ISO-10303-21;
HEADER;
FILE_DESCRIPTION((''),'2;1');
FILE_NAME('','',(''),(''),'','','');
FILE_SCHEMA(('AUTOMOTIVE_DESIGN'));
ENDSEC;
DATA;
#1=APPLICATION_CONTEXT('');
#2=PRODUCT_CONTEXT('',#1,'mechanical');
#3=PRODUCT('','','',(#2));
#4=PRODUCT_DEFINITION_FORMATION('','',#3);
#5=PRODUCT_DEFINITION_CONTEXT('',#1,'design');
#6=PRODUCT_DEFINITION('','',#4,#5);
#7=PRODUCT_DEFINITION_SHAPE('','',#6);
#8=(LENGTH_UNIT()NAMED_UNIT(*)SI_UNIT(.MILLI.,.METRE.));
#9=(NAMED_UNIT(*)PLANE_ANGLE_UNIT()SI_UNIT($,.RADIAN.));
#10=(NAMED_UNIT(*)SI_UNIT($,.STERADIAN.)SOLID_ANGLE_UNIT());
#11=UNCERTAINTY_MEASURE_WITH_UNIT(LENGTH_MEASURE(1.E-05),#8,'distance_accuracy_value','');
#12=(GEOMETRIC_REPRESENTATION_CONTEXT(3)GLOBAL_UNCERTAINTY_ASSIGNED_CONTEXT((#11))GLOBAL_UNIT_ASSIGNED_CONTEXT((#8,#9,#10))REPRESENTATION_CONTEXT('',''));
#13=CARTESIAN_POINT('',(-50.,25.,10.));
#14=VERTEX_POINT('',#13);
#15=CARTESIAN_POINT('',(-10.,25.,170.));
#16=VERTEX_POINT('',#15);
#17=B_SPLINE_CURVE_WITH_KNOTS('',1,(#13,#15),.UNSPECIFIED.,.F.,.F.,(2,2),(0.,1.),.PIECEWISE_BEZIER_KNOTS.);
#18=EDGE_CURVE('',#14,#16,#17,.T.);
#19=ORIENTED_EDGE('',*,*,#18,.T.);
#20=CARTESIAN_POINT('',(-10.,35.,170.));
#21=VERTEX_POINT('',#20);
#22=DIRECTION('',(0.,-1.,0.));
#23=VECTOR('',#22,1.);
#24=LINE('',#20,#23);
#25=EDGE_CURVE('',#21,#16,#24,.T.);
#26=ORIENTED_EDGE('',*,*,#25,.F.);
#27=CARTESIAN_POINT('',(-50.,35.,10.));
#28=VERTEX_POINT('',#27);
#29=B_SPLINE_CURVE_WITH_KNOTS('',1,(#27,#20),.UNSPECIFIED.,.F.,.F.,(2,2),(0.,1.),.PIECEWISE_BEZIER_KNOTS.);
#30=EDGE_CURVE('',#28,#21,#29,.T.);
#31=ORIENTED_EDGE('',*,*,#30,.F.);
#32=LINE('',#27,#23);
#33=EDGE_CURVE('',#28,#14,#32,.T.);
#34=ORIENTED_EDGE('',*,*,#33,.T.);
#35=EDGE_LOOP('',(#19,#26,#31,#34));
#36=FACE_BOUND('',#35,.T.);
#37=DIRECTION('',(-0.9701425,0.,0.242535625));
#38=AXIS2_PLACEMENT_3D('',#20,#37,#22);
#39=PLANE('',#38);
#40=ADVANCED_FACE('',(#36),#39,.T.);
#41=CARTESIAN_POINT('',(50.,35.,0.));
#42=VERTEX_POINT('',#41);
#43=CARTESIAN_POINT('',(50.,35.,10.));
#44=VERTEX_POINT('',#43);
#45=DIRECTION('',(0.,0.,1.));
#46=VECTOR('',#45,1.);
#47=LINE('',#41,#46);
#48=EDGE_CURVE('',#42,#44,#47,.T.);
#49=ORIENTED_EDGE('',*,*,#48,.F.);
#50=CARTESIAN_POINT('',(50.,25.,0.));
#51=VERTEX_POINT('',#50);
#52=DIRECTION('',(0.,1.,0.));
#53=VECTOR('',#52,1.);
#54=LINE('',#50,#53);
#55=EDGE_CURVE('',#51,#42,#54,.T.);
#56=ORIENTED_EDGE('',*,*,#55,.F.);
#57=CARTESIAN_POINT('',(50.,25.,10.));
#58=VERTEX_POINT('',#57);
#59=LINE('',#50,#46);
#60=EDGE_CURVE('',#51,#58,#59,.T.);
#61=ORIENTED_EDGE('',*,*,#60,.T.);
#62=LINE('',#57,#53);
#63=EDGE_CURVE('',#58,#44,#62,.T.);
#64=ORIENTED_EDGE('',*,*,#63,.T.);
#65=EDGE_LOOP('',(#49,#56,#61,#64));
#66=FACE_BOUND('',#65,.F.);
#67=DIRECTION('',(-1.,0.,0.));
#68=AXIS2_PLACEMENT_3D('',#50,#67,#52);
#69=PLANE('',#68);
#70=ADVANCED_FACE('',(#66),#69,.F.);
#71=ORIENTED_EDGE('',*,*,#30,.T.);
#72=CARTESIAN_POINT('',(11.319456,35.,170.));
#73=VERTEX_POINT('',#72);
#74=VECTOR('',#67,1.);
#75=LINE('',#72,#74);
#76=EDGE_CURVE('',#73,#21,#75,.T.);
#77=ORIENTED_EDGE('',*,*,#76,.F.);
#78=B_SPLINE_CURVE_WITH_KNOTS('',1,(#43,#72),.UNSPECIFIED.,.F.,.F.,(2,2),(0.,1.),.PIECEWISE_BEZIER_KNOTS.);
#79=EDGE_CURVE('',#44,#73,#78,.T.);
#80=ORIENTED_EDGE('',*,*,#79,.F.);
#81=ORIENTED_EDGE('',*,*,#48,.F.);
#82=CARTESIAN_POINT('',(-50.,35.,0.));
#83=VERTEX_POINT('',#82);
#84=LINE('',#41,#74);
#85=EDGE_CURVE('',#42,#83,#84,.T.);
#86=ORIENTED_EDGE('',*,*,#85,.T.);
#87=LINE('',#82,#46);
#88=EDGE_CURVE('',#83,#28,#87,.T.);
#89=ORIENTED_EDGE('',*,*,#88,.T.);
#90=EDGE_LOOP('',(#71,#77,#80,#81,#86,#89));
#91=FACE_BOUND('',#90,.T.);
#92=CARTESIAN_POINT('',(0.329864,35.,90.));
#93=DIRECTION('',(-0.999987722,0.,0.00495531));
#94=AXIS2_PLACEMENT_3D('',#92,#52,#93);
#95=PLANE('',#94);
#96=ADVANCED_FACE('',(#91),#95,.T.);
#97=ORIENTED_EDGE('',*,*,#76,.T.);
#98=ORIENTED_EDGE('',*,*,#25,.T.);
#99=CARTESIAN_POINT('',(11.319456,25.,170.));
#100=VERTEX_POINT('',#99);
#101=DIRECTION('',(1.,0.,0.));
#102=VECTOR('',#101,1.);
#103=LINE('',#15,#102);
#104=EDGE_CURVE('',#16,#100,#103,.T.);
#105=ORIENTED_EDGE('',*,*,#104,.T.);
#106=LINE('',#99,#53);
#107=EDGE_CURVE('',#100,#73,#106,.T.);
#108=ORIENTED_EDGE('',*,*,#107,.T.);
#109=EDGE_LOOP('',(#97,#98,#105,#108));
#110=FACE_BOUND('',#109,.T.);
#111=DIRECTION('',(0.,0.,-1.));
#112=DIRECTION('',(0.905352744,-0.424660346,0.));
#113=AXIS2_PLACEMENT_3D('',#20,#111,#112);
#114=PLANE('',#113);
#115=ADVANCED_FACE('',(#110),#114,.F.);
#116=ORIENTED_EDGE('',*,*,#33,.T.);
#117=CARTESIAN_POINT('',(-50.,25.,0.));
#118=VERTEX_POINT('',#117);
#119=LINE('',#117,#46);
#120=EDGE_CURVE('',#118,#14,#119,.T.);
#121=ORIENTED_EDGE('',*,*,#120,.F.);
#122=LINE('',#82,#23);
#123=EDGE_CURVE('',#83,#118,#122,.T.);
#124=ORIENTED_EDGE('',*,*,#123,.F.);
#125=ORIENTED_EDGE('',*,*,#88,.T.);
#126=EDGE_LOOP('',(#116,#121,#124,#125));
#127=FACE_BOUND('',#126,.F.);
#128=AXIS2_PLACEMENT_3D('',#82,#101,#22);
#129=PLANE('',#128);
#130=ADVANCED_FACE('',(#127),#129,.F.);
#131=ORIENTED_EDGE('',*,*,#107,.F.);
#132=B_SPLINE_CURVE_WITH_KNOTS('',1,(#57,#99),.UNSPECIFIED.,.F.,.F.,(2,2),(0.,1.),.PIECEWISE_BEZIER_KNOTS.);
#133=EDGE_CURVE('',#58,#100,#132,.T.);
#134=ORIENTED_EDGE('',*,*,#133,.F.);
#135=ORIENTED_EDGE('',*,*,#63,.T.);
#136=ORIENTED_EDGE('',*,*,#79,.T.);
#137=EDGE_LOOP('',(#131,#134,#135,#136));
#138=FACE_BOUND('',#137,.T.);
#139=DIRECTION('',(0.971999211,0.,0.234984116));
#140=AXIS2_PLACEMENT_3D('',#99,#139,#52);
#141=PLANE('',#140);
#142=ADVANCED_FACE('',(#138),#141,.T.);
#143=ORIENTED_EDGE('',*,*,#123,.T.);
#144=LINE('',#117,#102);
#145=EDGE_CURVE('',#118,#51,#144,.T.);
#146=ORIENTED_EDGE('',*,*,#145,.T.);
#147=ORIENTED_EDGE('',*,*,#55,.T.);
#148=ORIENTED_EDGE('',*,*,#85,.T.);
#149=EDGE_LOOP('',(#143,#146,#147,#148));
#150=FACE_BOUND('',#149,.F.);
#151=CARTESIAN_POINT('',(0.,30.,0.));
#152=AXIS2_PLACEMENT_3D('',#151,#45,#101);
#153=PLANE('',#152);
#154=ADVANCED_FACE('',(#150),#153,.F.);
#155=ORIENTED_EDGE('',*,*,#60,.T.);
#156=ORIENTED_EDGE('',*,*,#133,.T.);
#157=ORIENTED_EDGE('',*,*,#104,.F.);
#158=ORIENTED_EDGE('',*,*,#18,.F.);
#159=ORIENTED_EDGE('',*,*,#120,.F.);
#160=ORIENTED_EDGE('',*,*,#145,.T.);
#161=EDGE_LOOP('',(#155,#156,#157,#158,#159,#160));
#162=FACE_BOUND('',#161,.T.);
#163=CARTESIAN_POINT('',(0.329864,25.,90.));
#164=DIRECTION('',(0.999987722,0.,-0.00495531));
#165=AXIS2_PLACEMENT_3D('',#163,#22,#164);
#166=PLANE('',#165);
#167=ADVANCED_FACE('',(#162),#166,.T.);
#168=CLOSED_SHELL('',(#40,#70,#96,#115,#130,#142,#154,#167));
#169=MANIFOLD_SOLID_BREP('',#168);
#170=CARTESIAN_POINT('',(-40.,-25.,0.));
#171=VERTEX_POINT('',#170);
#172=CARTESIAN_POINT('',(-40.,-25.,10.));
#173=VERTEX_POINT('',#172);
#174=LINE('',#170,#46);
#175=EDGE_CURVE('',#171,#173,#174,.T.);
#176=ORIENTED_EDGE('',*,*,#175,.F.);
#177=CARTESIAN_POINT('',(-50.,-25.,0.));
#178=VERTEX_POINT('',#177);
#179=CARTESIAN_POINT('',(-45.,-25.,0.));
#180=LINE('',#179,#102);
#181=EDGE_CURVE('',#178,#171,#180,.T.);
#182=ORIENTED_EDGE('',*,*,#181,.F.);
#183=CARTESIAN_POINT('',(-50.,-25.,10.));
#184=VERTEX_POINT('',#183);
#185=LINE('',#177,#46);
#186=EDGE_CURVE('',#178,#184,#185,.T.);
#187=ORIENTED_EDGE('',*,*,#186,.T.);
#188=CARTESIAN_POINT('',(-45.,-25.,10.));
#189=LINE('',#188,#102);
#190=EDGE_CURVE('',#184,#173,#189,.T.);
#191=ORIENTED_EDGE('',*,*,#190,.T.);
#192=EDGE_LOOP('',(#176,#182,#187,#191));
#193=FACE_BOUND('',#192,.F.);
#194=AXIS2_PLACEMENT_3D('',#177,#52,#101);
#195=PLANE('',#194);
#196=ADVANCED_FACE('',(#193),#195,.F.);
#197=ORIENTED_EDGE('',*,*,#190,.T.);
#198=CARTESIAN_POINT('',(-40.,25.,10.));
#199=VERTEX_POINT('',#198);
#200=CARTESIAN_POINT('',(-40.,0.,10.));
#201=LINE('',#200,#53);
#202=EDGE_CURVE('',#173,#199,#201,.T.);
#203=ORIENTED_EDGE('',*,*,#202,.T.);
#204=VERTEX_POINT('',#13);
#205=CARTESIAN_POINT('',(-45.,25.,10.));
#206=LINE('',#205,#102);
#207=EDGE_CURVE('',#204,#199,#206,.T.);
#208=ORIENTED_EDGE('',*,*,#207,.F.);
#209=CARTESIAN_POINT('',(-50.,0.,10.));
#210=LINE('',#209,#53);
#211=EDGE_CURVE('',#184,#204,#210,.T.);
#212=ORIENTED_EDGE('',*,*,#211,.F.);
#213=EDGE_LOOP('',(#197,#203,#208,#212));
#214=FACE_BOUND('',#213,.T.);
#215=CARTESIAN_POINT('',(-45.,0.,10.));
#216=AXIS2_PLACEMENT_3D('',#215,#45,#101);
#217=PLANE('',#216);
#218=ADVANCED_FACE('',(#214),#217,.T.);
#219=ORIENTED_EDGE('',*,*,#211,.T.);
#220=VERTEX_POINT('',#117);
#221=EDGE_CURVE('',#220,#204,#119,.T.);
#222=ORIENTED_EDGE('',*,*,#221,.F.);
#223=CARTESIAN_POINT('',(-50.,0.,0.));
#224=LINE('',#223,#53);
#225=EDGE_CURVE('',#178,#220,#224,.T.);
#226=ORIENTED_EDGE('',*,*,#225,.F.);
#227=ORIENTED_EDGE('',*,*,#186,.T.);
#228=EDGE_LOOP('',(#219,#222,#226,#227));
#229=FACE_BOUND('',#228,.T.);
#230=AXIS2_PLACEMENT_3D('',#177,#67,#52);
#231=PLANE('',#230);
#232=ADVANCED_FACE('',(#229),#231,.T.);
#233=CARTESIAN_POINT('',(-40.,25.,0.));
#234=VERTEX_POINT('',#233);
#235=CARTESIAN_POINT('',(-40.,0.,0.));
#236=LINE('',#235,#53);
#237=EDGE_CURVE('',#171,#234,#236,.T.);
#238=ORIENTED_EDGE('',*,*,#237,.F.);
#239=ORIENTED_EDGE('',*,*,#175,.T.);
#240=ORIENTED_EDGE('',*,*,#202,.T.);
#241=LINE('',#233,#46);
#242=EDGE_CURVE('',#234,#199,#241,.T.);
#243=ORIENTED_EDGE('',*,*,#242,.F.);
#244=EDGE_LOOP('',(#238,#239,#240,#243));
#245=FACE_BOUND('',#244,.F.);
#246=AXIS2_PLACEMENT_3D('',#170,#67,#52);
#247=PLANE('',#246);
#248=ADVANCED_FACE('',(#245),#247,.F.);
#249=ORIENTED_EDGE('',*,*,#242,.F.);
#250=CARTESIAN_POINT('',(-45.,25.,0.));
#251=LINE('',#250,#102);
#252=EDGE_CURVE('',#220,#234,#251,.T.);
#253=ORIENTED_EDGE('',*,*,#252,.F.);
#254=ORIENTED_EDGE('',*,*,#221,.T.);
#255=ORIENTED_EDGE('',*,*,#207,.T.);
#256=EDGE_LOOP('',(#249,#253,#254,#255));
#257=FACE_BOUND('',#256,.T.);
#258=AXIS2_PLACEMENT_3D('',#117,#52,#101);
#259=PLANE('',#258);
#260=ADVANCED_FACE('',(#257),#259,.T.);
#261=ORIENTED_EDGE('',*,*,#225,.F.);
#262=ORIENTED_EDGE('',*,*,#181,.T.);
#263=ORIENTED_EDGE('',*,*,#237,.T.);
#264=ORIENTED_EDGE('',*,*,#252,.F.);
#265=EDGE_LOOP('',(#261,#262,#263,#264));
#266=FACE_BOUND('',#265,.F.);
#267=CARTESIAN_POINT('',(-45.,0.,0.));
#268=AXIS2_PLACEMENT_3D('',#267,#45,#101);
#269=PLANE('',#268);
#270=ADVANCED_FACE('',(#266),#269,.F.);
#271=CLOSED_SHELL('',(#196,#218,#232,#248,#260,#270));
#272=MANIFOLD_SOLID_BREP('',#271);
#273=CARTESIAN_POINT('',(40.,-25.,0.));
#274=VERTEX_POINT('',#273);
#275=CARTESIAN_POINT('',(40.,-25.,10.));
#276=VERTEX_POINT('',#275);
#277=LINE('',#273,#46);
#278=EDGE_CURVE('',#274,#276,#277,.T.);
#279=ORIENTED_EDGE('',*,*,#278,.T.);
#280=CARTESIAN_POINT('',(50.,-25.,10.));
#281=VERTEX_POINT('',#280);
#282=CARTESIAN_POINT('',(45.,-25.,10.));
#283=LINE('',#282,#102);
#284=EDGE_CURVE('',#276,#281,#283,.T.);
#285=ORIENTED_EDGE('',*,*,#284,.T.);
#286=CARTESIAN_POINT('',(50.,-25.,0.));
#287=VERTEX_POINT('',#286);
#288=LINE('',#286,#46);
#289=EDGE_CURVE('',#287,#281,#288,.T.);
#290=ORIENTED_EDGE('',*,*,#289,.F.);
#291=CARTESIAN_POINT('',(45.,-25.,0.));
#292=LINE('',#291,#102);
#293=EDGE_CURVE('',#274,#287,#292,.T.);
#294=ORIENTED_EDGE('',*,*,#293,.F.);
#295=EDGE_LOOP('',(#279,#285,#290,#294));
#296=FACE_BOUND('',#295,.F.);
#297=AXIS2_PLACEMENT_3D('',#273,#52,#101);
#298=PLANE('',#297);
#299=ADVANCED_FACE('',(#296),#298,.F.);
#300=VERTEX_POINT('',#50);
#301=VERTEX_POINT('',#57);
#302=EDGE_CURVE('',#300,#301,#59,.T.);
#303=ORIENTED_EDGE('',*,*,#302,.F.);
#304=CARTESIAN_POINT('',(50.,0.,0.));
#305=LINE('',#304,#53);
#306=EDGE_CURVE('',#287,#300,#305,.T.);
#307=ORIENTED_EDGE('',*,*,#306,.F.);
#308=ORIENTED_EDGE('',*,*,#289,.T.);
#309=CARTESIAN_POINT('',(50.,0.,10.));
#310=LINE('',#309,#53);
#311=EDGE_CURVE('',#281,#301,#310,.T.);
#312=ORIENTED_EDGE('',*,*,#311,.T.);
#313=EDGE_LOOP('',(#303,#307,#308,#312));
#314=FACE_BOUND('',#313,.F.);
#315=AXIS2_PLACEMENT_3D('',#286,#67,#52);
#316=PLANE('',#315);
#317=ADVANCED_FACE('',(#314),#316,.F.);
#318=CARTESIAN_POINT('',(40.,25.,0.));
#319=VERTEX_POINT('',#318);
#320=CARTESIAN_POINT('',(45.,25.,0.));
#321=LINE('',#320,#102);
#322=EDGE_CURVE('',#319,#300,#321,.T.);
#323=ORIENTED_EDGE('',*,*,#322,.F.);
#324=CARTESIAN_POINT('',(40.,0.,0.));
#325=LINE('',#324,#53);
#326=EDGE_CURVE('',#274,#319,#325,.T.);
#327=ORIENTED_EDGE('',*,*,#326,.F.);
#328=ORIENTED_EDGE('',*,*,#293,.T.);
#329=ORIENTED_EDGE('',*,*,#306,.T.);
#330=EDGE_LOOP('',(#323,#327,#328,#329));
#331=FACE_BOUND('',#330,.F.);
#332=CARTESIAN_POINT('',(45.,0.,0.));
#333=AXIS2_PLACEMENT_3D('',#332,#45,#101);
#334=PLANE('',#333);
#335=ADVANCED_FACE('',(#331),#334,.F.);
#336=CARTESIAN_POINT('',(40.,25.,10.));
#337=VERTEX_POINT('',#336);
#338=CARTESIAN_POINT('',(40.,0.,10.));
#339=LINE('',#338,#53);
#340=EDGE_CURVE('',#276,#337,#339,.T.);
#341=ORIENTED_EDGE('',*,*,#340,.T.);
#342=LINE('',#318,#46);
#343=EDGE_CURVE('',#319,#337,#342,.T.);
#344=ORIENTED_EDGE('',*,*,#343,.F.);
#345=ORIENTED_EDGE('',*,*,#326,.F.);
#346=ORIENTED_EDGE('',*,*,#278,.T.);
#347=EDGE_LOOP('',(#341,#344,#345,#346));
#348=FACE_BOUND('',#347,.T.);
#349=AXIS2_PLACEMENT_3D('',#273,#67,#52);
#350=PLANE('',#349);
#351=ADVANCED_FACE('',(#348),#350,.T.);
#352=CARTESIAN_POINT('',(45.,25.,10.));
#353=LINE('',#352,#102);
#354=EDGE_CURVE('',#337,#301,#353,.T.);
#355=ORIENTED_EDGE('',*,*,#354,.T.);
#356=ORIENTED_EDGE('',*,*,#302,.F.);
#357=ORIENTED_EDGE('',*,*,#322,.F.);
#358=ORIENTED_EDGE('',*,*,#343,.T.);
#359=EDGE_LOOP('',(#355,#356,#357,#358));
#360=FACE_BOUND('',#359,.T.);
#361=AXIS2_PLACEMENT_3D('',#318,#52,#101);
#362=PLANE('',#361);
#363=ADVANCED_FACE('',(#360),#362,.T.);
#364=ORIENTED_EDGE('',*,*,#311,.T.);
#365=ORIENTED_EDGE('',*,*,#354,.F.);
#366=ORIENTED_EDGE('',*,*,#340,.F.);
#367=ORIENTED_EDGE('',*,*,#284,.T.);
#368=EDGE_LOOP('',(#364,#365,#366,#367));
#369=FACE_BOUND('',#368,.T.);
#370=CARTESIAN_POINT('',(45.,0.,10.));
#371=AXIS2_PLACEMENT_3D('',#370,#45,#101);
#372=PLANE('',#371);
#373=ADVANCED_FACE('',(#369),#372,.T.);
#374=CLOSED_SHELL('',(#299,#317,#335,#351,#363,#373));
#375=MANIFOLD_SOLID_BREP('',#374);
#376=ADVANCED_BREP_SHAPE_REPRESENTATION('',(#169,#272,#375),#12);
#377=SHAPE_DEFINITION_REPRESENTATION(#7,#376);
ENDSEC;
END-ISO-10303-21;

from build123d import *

# Parameters (mm, degrees)
F0_W      = 10
F0_H      = 50
F1_DEPTH  = 10
F4_DEPTH  = 10
F4_FACE_W = 100
F4_FACE_H = 10


with BuildPart() as f1:
    # F0 (on Top) → F1 (new body)
    with BuildSketch(Plane.XY):
        with Locations((-45, 0)):
            Rectangle(F0_W, F0_H)
    extrude(amount=F1_DEPTH)


with BuildPart() as f1b:
    # F0 (on Top) → F1, piece 2 (new body)
    with BuildSketch(Plane.XY):
        with Locations((45, 0)):
            Rectangle(F0_W, F0_H)
    extrude(amount=F1_DEPTH)


with BuildPart() as f4:
    # F0 (on Top) → F4 (new body)
    with BuildSketch(Plane.XY):
        Polygon((-40, 25), (40, 25), (50, 25), (50, 35), (-50, 35), (-50, 25), align=None)
    extrude(amount=F4_DEPTH)

    # F4_face (on face) → F5 section 0
    with BuildSketch(Plane(origin=(0, 30, 10), x_dir=(1, 0, 0), z_dir=(0, 0, 1))):
        Rectangle(F4_FACE_W, F4_FACE_H)
    # F3 (on offset) → F5 section 1
    with BuildSketch(Plane.XY.offset(170)):
        Polygon((0, 35), (-10, 35), (-10, 25), (11.3194556907, 25), (11.3194556907, 35), align=None)
    loft()


solid = Compound([f1.part, f1b.part, f4.part])
